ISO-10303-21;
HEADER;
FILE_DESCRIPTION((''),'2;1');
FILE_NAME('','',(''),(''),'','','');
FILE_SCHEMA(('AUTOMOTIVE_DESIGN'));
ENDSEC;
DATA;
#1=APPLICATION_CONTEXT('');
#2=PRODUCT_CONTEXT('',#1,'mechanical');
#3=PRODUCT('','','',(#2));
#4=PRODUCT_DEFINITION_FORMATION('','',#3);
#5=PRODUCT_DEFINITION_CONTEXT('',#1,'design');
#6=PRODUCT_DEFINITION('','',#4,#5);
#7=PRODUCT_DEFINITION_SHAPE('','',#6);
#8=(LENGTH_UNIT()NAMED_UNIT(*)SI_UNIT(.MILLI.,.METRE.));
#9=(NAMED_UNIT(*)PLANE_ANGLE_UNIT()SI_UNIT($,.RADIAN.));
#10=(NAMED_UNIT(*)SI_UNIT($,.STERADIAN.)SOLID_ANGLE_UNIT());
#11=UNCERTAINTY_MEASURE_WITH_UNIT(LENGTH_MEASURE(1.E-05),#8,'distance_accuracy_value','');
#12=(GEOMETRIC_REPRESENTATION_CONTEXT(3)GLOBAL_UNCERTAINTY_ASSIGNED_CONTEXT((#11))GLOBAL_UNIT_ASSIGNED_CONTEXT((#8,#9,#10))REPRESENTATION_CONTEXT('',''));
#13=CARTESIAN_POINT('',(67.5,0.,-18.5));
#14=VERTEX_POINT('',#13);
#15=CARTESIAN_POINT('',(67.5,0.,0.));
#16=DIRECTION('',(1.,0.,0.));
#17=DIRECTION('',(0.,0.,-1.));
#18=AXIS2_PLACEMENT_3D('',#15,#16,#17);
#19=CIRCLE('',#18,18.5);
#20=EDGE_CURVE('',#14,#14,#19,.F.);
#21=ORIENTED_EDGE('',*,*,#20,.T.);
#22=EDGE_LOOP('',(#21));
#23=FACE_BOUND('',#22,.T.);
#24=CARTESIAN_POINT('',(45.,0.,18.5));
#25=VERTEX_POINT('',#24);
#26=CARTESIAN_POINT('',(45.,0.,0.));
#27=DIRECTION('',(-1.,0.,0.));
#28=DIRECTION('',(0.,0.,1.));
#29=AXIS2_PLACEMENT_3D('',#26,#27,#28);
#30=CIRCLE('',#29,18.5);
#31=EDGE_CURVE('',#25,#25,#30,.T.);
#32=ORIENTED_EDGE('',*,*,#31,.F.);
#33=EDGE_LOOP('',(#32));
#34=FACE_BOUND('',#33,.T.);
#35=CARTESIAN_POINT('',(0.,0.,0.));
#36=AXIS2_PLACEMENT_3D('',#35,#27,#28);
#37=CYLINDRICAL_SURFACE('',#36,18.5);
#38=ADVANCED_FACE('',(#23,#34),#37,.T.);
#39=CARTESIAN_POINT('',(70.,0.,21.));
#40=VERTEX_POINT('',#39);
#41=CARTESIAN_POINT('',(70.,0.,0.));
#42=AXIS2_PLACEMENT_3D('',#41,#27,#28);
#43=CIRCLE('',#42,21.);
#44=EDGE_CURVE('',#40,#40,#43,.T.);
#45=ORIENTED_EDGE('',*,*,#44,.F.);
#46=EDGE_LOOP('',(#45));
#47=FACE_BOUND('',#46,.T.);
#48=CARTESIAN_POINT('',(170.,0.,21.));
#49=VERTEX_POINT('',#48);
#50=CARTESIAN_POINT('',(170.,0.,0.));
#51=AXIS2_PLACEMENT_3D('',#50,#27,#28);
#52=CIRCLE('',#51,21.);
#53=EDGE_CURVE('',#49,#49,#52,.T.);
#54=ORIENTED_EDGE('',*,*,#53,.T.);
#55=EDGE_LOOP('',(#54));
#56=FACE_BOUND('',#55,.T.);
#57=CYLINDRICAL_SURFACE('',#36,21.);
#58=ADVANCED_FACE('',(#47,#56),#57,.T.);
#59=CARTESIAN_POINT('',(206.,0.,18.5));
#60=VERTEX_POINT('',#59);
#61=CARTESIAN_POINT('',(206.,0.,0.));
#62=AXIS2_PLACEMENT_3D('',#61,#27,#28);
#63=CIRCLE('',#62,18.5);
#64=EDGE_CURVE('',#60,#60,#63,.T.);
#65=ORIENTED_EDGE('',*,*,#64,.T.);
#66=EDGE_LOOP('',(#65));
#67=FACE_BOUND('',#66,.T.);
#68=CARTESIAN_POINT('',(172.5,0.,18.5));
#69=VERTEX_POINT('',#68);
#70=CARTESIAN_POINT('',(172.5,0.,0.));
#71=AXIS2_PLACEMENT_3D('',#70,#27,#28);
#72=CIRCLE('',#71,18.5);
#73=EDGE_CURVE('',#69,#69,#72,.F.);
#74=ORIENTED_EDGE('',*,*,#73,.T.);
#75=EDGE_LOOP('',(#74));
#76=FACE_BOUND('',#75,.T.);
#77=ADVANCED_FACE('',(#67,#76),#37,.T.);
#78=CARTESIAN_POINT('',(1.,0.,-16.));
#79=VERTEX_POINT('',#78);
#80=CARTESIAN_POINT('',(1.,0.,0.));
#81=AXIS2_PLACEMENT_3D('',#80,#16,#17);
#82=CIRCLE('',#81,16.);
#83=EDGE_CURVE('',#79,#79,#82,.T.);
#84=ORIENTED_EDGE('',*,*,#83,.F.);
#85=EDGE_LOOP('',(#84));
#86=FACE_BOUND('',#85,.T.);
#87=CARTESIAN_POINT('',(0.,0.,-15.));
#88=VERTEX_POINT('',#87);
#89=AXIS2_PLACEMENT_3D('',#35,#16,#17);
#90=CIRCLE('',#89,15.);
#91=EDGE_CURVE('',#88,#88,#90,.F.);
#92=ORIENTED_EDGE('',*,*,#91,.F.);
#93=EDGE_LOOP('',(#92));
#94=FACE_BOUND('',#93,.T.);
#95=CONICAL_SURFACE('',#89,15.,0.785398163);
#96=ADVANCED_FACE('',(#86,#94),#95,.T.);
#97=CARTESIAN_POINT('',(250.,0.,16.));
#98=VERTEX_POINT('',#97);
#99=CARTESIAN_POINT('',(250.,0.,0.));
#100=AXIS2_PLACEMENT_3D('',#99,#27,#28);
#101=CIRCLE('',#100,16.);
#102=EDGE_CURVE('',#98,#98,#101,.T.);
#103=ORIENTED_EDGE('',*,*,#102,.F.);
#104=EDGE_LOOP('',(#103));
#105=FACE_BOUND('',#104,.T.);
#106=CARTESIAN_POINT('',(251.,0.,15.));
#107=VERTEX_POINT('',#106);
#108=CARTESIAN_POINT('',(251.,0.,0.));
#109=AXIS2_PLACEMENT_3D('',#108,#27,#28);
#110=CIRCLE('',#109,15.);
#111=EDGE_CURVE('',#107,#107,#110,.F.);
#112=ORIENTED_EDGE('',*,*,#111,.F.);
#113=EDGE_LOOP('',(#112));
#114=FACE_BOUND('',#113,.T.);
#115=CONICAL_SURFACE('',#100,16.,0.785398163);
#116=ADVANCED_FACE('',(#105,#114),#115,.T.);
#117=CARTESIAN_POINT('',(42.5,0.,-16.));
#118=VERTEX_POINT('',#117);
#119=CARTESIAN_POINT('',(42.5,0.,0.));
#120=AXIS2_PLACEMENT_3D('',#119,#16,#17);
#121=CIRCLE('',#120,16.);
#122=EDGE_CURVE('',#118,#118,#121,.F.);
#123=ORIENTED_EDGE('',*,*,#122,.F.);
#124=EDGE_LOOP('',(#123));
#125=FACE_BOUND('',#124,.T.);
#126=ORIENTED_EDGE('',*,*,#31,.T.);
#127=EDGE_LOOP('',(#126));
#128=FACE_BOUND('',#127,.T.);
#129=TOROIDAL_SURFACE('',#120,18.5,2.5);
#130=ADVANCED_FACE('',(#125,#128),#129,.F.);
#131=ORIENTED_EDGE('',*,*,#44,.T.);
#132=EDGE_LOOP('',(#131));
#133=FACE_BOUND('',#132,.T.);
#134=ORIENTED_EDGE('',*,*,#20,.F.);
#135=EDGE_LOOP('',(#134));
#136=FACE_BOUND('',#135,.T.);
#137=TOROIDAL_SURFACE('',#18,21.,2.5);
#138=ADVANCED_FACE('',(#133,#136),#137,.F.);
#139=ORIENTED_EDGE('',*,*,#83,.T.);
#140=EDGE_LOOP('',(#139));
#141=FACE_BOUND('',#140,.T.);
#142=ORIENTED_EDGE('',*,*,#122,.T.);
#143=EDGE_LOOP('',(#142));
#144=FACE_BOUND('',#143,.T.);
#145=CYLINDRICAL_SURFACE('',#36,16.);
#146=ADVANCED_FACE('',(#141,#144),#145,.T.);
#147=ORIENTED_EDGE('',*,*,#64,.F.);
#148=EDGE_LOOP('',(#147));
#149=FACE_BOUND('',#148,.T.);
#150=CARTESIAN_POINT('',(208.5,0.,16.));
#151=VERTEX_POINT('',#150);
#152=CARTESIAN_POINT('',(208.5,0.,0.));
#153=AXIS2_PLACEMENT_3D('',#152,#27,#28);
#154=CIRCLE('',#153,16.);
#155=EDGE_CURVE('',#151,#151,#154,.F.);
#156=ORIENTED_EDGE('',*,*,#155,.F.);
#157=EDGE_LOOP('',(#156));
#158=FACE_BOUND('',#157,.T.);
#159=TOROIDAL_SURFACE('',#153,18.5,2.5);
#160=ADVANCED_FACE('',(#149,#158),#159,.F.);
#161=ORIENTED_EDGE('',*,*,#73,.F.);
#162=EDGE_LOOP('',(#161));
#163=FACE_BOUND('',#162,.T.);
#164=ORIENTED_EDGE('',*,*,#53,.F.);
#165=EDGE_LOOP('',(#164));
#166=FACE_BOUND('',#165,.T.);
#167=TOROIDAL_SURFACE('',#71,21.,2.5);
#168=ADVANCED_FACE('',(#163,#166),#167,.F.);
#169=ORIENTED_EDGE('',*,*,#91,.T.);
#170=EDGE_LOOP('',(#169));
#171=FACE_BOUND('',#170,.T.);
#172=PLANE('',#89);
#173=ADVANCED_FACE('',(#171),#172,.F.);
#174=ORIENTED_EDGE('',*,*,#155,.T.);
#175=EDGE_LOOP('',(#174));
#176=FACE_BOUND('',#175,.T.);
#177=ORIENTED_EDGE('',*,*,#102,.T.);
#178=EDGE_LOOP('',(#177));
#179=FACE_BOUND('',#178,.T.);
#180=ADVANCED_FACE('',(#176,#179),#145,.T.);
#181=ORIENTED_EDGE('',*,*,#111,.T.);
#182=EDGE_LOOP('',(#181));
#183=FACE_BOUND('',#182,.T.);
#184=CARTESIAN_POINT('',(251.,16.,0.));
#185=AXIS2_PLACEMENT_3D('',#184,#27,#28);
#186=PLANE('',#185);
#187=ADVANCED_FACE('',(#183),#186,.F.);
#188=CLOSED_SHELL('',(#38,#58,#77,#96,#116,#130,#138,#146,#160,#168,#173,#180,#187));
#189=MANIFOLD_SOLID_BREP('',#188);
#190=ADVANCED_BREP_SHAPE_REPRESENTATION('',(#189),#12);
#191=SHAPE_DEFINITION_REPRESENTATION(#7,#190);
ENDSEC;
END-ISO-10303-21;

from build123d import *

# Parameters (mm, degrees)
FILLET1_R     = 2.5
CHAMFER1_SIZE = 1


with BuildPart() as part:
    # Sketch1 → Revolve1 (revolve)
    with BuildSketch(Plane.XY, mode=Mode.PRIVATE) as revolve1_sk:
        Polygon((0, 0), (251, 0), (251, 16), (206, 16), (206, 18.5), (170, 18.5), (170, 21), (70, 21), (70, 18.5), (45, 18.5), (45, 16), (0, 16), align=None)
    revolve(revolve1_sk.sketch.rotate(Axis((0, 0, 0), (1, 0, 0)), 90), axis=Axis((0, 0, 0), (1, 0, 0)))

    # Fillet1
    fillet1_edges = [part.edges().sort_by_distance(p)[0] for p in [
        (170, 0, -18.5),
        (70, 0, -18.5),
        (45, 0, -16),
        (206, 0, -16),
    ]]
    fillet(fillet1_edges, radius=FILLET1_R - 0.0001)  # a hair under: the kernel refuses the full size

    # Chamfer1
    chamfer1_edges = [part.edges().sort_by_distance(p)[0] for p in [
        (0, 0, -16),
        (251, 0, -16),
    ]]
    chamfer(chamfer1_edges, length=CHAMFER1_SIZE)


solid = part.part
